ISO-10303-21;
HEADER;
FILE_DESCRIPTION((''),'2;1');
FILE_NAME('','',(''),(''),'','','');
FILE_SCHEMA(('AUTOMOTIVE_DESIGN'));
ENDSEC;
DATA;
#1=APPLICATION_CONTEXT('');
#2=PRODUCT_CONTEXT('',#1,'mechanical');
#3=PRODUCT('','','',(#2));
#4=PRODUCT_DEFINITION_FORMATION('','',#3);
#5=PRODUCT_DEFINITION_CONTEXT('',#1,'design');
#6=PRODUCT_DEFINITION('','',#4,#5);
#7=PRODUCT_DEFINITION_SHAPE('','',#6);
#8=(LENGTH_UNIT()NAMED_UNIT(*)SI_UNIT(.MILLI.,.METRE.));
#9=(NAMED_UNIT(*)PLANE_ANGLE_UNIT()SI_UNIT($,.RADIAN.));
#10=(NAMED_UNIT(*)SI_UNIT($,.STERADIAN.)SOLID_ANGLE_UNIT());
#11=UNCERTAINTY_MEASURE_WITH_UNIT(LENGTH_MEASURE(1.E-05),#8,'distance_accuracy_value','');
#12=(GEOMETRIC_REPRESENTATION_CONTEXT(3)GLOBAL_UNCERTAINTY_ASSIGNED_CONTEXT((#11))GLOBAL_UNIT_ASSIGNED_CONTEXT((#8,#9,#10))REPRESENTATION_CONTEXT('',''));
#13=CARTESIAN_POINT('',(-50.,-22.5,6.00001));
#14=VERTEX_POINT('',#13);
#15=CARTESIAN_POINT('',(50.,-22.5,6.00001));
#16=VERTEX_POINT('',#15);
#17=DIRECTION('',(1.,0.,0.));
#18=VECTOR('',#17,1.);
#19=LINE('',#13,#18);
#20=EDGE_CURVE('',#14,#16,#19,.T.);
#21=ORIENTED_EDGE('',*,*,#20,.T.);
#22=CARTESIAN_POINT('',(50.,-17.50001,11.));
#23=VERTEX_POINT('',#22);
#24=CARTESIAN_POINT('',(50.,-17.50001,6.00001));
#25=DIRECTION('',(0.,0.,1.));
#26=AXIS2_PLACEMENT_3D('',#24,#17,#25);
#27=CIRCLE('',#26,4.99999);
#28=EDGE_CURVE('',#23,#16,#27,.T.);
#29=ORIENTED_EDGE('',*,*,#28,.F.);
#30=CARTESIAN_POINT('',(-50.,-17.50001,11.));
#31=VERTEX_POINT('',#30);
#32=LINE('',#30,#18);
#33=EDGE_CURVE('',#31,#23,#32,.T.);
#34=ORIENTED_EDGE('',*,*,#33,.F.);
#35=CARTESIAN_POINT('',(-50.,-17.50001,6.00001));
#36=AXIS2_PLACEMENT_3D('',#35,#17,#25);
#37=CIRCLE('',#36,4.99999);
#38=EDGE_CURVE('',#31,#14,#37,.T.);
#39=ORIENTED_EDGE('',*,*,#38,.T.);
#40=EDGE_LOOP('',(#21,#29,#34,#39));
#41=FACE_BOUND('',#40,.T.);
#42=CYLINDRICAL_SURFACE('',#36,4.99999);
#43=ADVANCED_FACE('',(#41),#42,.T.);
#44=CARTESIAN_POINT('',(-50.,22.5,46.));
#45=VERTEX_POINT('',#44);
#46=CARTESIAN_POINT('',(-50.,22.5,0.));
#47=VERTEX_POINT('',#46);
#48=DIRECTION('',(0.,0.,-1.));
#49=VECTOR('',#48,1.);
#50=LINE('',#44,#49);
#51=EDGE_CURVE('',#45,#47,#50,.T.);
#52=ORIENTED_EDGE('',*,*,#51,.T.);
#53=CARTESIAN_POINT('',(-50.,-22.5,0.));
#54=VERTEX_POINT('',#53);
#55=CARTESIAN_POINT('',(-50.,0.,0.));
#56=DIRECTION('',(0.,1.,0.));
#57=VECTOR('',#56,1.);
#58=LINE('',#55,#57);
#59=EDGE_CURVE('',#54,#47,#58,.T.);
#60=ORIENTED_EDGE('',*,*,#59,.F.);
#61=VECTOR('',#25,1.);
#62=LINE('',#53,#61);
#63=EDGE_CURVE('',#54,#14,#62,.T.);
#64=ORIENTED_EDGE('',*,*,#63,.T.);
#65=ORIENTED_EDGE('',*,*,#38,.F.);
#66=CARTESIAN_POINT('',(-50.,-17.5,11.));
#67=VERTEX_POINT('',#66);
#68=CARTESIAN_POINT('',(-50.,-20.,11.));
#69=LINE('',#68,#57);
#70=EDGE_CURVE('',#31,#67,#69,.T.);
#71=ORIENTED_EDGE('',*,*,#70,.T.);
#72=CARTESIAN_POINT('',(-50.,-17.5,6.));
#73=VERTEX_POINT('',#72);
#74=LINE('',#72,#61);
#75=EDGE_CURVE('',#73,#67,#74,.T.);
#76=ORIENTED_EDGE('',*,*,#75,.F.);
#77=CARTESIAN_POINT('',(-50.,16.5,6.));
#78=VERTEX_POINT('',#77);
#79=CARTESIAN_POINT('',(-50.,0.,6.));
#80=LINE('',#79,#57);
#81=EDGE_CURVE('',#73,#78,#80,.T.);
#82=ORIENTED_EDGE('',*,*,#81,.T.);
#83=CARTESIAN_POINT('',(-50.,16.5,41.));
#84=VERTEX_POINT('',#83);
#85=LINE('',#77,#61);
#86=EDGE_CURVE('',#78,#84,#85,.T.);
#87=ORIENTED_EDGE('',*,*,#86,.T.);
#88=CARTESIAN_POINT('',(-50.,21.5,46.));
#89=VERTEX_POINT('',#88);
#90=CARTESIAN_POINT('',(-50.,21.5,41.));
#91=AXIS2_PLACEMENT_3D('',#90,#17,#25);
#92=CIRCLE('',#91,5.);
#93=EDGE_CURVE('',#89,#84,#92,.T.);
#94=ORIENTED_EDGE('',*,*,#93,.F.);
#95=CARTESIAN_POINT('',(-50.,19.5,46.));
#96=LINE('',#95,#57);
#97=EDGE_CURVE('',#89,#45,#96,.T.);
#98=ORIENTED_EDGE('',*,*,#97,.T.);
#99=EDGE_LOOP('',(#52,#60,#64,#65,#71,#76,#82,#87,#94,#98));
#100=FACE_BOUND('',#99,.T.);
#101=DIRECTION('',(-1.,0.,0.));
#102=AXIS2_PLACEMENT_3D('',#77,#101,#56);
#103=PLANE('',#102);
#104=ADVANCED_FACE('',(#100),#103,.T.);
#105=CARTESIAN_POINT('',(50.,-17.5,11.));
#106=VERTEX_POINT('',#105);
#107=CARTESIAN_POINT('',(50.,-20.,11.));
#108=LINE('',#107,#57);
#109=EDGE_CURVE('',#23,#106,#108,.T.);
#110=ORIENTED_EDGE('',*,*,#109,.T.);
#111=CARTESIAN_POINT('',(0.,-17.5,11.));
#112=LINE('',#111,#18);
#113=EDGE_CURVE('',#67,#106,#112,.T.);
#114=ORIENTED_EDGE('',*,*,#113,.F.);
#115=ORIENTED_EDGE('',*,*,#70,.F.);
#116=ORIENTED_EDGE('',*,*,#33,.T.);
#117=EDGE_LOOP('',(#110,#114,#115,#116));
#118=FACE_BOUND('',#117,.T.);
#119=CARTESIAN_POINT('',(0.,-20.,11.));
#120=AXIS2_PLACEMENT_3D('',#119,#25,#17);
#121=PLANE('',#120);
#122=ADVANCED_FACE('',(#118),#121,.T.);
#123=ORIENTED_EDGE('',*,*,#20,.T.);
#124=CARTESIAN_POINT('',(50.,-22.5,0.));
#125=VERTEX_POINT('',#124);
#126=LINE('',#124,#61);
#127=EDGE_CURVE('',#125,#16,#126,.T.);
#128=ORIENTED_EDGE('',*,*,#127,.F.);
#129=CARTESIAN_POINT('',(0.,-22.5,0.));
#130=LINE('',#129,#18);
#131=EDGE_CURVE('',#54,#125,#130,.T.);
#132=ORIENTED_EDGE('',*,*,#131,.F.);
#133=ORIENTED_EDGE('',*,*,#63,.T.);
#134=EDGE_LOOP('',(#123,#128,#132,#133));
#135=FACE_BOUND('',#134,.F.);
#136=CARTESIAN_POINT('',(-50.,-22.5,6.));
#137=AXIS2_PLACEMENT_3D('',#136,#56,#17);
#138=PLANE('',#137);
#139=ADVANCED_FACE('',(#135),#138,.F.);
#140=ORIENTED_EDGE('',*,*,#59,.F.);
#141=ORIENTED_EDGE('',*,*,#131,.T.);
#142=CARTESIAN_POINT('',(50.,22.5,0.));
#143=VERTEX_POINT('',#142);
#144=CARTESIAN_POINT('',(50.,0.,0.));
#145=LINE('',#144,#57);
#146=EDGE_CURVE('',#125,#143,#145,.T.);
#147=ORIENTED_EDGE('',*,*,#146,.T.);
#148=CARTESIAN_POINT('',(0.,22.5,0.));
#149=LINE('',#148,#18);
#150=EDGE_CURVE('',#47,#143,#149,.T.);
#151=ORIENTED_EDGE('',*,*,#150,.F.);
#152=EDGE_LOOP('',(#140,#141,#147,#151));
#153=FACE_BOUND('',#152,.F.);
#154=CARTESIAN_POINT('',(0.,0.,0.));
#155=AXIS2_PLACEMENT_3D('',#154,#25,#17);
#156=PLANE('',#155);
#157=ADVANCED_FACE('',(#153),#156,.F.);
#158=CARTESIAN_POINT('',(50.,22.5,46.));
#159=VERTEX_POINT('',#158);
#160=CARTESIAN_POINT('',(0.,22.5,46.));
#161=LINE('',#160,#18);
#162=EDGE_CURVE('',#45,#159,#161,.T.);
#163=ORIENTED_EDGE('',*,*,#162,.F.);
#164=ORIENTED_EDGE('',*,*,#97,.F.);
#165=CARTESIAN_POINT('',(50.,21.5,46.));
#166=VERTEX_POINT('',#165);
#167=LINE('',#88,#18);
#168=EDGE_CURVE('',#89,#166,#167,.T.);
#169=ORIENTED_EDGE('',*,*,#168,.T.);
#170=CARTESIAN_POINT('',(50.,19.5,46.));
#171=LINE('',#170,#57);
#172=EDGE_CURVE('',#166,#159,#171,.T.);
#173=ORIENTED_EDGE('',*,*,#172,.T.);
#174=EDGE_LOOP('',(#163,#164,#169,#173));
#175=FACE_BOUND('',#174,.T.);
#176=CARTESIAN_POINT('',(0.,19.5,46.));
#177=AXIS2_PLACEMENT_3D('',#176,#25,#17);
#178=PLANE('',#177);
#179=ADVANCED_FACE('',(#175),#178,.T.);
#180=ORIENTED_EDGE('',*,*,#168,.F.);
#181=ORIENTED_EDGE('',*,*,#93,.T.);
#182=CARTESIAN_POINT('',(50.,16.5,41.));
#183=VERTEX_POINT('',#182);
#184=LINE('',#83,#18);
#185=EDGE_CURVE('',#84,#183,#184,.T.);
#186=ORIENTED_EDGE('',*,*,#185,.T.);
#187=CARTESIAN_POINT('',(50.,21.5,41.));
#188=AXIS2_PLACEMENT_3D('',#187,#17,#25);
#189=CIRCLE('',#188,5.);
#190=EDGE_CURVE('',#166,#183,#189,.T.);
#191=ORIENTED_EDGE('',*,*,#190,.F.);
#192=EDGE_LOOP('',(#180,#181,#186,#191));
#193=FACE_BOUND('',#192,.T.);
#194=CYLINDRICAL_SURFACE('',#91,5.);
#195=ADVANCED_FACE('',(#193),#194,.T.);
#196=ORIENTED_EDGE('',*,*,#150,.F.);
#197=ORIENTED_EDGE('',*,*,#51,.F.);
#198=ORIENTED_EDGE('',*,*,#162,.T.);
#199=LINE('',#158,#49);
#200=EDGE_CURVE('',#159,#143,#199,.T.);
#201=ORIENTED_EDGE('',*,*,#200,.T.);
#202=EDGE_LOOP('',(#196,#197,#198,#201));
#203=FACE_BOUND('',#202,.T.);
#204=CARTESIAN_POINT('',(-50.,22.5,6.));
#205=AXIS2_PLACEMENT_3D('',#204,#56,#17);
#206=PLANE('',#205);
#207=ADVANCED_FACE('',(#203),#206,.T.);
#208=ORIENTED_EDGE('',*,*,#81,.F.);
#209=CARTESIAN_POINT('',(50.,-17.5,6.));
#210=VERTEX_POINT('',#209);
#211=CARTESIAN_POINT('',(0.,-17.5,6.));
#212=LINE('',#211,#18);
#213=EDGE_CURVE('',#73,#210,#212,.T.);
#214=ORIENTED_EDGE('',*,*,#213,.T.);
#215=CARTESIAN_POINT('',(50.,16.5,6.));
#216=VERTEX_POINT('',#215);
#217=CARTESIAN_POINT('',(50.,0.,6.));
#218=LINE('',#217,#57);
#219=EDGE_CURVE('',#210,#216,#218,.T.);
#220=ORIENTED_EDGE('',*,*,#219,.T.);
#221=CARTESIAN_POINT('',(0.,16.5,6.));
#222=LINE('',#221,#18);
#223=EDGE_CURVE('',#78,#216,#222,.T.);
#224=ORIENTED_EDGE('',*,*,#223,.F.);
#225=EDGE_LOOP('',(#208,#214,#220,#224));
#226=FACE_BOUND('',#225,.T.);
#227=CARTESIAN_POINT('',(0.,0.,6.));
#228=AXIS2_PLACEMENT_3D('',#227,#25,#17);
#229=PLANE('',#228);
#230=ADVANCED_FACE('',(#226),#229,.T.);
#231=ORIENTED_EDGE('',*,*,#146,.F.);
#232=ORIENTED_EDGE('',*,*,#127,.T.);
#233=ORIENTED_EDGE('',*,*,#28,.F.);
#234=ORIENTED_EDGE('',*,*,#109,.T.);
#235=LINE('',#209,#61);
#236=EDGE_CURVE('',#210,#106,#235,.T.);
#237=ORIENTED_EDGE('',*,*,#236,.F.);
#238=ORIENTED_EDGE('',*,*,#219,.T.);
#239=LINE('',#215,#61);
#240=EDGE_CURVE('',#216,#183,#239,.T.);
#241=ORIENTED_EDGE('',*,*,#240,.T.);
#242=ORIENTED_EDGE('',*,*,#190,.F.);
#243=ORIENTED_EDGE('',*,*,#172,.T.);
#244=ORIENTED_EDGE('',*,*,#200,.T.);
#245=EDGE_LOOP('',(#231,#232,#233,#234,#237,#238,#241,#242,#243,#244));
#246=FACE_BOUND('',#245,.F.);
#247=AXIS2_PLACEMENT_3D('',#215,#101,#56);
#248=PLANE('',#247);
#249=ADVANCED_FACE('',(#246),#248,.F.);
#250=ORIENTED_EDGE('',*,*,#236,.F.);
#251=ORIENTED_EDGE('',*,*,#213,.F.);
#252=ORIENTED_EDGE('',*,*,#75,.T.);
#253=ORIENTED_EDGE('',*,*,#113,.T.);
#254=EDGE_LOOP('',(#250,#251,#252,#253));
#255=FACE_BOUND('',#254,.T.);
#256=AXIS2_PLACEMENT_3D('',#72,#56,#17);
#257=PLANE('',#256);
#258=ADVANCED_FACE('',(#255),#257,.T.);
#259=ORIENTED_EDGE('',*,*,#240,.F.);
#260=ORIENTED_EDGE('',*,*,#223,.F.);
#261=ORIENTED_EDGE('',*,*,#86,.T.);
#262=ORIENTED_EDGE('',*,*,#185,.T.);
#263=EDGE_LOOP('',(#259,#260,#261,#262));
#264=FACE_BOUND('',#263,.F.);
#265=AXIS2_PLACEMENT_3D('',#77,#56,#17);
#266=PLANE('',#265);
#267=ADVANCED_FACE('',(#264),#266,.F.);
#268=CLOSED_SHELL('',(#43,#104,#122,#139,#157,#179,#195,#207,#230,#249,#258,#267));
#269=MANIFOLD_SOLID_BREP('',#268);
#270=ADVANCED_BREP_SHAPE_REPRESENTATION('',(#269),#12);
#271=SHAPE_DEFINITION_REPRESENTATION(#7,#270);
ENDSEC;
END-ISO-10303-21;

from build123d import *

# Parameters (mm, degrees)
F0_W     = 100
F0_H     = 45
F1_DEPTH = 6
F2_W     = 100
F2_H     = 5
F3_DEPTH = 5
F4_W     = 100
F4_H     = 6
F5_DEPTH = 40
F6_R     = 4.99999
F7_R     = 5


# Not quite as in the source:
# - a fillet or chamfer is up to 0.001 mm smaller than in the source, because OpenCascade refuses the exact size


with BuildPart() as f1:
    # F0 (on Top) → F1 (new body)
    with BuildSketch(Plane.XY):
        Rectangle(F0_W, F0_H)
    extrude(amount=F1_DEPTH)

    # F2 (on face) → F3 (join)
    with BuildSketch(Plane.XY.offset(6)):
        with Locations((0, -20)):
            Rectangle(F2_W, F2_H)
    extrude(amount=F3_DEPTH)

    # F4 (on face) → F5 (join)
    with BuildSketch(Plane.XY.offset(6)):
        with Locations((0, 19.5)):
            Rectangle(F4_W, F4_H)
    extrude(amount=F5_DEPTH)

    # F6 (radius 5 in the source; OpenCascade refuses exactly that, so slightly less here)
    f6_edges = [f1.edges().sort_by_distance(p)[0] for p in [
        (0, -22.5, 11),
    ]]
    fillet(f6_edges, radius=F6_R)

    # F7
    f7_edges = [f1.edges().sort_by_distance(p)[0] for p in [
        (0, 16.5, 46),
    ]]
    fillet(f7_edges, radius=F7_R)


solid = f1.part
